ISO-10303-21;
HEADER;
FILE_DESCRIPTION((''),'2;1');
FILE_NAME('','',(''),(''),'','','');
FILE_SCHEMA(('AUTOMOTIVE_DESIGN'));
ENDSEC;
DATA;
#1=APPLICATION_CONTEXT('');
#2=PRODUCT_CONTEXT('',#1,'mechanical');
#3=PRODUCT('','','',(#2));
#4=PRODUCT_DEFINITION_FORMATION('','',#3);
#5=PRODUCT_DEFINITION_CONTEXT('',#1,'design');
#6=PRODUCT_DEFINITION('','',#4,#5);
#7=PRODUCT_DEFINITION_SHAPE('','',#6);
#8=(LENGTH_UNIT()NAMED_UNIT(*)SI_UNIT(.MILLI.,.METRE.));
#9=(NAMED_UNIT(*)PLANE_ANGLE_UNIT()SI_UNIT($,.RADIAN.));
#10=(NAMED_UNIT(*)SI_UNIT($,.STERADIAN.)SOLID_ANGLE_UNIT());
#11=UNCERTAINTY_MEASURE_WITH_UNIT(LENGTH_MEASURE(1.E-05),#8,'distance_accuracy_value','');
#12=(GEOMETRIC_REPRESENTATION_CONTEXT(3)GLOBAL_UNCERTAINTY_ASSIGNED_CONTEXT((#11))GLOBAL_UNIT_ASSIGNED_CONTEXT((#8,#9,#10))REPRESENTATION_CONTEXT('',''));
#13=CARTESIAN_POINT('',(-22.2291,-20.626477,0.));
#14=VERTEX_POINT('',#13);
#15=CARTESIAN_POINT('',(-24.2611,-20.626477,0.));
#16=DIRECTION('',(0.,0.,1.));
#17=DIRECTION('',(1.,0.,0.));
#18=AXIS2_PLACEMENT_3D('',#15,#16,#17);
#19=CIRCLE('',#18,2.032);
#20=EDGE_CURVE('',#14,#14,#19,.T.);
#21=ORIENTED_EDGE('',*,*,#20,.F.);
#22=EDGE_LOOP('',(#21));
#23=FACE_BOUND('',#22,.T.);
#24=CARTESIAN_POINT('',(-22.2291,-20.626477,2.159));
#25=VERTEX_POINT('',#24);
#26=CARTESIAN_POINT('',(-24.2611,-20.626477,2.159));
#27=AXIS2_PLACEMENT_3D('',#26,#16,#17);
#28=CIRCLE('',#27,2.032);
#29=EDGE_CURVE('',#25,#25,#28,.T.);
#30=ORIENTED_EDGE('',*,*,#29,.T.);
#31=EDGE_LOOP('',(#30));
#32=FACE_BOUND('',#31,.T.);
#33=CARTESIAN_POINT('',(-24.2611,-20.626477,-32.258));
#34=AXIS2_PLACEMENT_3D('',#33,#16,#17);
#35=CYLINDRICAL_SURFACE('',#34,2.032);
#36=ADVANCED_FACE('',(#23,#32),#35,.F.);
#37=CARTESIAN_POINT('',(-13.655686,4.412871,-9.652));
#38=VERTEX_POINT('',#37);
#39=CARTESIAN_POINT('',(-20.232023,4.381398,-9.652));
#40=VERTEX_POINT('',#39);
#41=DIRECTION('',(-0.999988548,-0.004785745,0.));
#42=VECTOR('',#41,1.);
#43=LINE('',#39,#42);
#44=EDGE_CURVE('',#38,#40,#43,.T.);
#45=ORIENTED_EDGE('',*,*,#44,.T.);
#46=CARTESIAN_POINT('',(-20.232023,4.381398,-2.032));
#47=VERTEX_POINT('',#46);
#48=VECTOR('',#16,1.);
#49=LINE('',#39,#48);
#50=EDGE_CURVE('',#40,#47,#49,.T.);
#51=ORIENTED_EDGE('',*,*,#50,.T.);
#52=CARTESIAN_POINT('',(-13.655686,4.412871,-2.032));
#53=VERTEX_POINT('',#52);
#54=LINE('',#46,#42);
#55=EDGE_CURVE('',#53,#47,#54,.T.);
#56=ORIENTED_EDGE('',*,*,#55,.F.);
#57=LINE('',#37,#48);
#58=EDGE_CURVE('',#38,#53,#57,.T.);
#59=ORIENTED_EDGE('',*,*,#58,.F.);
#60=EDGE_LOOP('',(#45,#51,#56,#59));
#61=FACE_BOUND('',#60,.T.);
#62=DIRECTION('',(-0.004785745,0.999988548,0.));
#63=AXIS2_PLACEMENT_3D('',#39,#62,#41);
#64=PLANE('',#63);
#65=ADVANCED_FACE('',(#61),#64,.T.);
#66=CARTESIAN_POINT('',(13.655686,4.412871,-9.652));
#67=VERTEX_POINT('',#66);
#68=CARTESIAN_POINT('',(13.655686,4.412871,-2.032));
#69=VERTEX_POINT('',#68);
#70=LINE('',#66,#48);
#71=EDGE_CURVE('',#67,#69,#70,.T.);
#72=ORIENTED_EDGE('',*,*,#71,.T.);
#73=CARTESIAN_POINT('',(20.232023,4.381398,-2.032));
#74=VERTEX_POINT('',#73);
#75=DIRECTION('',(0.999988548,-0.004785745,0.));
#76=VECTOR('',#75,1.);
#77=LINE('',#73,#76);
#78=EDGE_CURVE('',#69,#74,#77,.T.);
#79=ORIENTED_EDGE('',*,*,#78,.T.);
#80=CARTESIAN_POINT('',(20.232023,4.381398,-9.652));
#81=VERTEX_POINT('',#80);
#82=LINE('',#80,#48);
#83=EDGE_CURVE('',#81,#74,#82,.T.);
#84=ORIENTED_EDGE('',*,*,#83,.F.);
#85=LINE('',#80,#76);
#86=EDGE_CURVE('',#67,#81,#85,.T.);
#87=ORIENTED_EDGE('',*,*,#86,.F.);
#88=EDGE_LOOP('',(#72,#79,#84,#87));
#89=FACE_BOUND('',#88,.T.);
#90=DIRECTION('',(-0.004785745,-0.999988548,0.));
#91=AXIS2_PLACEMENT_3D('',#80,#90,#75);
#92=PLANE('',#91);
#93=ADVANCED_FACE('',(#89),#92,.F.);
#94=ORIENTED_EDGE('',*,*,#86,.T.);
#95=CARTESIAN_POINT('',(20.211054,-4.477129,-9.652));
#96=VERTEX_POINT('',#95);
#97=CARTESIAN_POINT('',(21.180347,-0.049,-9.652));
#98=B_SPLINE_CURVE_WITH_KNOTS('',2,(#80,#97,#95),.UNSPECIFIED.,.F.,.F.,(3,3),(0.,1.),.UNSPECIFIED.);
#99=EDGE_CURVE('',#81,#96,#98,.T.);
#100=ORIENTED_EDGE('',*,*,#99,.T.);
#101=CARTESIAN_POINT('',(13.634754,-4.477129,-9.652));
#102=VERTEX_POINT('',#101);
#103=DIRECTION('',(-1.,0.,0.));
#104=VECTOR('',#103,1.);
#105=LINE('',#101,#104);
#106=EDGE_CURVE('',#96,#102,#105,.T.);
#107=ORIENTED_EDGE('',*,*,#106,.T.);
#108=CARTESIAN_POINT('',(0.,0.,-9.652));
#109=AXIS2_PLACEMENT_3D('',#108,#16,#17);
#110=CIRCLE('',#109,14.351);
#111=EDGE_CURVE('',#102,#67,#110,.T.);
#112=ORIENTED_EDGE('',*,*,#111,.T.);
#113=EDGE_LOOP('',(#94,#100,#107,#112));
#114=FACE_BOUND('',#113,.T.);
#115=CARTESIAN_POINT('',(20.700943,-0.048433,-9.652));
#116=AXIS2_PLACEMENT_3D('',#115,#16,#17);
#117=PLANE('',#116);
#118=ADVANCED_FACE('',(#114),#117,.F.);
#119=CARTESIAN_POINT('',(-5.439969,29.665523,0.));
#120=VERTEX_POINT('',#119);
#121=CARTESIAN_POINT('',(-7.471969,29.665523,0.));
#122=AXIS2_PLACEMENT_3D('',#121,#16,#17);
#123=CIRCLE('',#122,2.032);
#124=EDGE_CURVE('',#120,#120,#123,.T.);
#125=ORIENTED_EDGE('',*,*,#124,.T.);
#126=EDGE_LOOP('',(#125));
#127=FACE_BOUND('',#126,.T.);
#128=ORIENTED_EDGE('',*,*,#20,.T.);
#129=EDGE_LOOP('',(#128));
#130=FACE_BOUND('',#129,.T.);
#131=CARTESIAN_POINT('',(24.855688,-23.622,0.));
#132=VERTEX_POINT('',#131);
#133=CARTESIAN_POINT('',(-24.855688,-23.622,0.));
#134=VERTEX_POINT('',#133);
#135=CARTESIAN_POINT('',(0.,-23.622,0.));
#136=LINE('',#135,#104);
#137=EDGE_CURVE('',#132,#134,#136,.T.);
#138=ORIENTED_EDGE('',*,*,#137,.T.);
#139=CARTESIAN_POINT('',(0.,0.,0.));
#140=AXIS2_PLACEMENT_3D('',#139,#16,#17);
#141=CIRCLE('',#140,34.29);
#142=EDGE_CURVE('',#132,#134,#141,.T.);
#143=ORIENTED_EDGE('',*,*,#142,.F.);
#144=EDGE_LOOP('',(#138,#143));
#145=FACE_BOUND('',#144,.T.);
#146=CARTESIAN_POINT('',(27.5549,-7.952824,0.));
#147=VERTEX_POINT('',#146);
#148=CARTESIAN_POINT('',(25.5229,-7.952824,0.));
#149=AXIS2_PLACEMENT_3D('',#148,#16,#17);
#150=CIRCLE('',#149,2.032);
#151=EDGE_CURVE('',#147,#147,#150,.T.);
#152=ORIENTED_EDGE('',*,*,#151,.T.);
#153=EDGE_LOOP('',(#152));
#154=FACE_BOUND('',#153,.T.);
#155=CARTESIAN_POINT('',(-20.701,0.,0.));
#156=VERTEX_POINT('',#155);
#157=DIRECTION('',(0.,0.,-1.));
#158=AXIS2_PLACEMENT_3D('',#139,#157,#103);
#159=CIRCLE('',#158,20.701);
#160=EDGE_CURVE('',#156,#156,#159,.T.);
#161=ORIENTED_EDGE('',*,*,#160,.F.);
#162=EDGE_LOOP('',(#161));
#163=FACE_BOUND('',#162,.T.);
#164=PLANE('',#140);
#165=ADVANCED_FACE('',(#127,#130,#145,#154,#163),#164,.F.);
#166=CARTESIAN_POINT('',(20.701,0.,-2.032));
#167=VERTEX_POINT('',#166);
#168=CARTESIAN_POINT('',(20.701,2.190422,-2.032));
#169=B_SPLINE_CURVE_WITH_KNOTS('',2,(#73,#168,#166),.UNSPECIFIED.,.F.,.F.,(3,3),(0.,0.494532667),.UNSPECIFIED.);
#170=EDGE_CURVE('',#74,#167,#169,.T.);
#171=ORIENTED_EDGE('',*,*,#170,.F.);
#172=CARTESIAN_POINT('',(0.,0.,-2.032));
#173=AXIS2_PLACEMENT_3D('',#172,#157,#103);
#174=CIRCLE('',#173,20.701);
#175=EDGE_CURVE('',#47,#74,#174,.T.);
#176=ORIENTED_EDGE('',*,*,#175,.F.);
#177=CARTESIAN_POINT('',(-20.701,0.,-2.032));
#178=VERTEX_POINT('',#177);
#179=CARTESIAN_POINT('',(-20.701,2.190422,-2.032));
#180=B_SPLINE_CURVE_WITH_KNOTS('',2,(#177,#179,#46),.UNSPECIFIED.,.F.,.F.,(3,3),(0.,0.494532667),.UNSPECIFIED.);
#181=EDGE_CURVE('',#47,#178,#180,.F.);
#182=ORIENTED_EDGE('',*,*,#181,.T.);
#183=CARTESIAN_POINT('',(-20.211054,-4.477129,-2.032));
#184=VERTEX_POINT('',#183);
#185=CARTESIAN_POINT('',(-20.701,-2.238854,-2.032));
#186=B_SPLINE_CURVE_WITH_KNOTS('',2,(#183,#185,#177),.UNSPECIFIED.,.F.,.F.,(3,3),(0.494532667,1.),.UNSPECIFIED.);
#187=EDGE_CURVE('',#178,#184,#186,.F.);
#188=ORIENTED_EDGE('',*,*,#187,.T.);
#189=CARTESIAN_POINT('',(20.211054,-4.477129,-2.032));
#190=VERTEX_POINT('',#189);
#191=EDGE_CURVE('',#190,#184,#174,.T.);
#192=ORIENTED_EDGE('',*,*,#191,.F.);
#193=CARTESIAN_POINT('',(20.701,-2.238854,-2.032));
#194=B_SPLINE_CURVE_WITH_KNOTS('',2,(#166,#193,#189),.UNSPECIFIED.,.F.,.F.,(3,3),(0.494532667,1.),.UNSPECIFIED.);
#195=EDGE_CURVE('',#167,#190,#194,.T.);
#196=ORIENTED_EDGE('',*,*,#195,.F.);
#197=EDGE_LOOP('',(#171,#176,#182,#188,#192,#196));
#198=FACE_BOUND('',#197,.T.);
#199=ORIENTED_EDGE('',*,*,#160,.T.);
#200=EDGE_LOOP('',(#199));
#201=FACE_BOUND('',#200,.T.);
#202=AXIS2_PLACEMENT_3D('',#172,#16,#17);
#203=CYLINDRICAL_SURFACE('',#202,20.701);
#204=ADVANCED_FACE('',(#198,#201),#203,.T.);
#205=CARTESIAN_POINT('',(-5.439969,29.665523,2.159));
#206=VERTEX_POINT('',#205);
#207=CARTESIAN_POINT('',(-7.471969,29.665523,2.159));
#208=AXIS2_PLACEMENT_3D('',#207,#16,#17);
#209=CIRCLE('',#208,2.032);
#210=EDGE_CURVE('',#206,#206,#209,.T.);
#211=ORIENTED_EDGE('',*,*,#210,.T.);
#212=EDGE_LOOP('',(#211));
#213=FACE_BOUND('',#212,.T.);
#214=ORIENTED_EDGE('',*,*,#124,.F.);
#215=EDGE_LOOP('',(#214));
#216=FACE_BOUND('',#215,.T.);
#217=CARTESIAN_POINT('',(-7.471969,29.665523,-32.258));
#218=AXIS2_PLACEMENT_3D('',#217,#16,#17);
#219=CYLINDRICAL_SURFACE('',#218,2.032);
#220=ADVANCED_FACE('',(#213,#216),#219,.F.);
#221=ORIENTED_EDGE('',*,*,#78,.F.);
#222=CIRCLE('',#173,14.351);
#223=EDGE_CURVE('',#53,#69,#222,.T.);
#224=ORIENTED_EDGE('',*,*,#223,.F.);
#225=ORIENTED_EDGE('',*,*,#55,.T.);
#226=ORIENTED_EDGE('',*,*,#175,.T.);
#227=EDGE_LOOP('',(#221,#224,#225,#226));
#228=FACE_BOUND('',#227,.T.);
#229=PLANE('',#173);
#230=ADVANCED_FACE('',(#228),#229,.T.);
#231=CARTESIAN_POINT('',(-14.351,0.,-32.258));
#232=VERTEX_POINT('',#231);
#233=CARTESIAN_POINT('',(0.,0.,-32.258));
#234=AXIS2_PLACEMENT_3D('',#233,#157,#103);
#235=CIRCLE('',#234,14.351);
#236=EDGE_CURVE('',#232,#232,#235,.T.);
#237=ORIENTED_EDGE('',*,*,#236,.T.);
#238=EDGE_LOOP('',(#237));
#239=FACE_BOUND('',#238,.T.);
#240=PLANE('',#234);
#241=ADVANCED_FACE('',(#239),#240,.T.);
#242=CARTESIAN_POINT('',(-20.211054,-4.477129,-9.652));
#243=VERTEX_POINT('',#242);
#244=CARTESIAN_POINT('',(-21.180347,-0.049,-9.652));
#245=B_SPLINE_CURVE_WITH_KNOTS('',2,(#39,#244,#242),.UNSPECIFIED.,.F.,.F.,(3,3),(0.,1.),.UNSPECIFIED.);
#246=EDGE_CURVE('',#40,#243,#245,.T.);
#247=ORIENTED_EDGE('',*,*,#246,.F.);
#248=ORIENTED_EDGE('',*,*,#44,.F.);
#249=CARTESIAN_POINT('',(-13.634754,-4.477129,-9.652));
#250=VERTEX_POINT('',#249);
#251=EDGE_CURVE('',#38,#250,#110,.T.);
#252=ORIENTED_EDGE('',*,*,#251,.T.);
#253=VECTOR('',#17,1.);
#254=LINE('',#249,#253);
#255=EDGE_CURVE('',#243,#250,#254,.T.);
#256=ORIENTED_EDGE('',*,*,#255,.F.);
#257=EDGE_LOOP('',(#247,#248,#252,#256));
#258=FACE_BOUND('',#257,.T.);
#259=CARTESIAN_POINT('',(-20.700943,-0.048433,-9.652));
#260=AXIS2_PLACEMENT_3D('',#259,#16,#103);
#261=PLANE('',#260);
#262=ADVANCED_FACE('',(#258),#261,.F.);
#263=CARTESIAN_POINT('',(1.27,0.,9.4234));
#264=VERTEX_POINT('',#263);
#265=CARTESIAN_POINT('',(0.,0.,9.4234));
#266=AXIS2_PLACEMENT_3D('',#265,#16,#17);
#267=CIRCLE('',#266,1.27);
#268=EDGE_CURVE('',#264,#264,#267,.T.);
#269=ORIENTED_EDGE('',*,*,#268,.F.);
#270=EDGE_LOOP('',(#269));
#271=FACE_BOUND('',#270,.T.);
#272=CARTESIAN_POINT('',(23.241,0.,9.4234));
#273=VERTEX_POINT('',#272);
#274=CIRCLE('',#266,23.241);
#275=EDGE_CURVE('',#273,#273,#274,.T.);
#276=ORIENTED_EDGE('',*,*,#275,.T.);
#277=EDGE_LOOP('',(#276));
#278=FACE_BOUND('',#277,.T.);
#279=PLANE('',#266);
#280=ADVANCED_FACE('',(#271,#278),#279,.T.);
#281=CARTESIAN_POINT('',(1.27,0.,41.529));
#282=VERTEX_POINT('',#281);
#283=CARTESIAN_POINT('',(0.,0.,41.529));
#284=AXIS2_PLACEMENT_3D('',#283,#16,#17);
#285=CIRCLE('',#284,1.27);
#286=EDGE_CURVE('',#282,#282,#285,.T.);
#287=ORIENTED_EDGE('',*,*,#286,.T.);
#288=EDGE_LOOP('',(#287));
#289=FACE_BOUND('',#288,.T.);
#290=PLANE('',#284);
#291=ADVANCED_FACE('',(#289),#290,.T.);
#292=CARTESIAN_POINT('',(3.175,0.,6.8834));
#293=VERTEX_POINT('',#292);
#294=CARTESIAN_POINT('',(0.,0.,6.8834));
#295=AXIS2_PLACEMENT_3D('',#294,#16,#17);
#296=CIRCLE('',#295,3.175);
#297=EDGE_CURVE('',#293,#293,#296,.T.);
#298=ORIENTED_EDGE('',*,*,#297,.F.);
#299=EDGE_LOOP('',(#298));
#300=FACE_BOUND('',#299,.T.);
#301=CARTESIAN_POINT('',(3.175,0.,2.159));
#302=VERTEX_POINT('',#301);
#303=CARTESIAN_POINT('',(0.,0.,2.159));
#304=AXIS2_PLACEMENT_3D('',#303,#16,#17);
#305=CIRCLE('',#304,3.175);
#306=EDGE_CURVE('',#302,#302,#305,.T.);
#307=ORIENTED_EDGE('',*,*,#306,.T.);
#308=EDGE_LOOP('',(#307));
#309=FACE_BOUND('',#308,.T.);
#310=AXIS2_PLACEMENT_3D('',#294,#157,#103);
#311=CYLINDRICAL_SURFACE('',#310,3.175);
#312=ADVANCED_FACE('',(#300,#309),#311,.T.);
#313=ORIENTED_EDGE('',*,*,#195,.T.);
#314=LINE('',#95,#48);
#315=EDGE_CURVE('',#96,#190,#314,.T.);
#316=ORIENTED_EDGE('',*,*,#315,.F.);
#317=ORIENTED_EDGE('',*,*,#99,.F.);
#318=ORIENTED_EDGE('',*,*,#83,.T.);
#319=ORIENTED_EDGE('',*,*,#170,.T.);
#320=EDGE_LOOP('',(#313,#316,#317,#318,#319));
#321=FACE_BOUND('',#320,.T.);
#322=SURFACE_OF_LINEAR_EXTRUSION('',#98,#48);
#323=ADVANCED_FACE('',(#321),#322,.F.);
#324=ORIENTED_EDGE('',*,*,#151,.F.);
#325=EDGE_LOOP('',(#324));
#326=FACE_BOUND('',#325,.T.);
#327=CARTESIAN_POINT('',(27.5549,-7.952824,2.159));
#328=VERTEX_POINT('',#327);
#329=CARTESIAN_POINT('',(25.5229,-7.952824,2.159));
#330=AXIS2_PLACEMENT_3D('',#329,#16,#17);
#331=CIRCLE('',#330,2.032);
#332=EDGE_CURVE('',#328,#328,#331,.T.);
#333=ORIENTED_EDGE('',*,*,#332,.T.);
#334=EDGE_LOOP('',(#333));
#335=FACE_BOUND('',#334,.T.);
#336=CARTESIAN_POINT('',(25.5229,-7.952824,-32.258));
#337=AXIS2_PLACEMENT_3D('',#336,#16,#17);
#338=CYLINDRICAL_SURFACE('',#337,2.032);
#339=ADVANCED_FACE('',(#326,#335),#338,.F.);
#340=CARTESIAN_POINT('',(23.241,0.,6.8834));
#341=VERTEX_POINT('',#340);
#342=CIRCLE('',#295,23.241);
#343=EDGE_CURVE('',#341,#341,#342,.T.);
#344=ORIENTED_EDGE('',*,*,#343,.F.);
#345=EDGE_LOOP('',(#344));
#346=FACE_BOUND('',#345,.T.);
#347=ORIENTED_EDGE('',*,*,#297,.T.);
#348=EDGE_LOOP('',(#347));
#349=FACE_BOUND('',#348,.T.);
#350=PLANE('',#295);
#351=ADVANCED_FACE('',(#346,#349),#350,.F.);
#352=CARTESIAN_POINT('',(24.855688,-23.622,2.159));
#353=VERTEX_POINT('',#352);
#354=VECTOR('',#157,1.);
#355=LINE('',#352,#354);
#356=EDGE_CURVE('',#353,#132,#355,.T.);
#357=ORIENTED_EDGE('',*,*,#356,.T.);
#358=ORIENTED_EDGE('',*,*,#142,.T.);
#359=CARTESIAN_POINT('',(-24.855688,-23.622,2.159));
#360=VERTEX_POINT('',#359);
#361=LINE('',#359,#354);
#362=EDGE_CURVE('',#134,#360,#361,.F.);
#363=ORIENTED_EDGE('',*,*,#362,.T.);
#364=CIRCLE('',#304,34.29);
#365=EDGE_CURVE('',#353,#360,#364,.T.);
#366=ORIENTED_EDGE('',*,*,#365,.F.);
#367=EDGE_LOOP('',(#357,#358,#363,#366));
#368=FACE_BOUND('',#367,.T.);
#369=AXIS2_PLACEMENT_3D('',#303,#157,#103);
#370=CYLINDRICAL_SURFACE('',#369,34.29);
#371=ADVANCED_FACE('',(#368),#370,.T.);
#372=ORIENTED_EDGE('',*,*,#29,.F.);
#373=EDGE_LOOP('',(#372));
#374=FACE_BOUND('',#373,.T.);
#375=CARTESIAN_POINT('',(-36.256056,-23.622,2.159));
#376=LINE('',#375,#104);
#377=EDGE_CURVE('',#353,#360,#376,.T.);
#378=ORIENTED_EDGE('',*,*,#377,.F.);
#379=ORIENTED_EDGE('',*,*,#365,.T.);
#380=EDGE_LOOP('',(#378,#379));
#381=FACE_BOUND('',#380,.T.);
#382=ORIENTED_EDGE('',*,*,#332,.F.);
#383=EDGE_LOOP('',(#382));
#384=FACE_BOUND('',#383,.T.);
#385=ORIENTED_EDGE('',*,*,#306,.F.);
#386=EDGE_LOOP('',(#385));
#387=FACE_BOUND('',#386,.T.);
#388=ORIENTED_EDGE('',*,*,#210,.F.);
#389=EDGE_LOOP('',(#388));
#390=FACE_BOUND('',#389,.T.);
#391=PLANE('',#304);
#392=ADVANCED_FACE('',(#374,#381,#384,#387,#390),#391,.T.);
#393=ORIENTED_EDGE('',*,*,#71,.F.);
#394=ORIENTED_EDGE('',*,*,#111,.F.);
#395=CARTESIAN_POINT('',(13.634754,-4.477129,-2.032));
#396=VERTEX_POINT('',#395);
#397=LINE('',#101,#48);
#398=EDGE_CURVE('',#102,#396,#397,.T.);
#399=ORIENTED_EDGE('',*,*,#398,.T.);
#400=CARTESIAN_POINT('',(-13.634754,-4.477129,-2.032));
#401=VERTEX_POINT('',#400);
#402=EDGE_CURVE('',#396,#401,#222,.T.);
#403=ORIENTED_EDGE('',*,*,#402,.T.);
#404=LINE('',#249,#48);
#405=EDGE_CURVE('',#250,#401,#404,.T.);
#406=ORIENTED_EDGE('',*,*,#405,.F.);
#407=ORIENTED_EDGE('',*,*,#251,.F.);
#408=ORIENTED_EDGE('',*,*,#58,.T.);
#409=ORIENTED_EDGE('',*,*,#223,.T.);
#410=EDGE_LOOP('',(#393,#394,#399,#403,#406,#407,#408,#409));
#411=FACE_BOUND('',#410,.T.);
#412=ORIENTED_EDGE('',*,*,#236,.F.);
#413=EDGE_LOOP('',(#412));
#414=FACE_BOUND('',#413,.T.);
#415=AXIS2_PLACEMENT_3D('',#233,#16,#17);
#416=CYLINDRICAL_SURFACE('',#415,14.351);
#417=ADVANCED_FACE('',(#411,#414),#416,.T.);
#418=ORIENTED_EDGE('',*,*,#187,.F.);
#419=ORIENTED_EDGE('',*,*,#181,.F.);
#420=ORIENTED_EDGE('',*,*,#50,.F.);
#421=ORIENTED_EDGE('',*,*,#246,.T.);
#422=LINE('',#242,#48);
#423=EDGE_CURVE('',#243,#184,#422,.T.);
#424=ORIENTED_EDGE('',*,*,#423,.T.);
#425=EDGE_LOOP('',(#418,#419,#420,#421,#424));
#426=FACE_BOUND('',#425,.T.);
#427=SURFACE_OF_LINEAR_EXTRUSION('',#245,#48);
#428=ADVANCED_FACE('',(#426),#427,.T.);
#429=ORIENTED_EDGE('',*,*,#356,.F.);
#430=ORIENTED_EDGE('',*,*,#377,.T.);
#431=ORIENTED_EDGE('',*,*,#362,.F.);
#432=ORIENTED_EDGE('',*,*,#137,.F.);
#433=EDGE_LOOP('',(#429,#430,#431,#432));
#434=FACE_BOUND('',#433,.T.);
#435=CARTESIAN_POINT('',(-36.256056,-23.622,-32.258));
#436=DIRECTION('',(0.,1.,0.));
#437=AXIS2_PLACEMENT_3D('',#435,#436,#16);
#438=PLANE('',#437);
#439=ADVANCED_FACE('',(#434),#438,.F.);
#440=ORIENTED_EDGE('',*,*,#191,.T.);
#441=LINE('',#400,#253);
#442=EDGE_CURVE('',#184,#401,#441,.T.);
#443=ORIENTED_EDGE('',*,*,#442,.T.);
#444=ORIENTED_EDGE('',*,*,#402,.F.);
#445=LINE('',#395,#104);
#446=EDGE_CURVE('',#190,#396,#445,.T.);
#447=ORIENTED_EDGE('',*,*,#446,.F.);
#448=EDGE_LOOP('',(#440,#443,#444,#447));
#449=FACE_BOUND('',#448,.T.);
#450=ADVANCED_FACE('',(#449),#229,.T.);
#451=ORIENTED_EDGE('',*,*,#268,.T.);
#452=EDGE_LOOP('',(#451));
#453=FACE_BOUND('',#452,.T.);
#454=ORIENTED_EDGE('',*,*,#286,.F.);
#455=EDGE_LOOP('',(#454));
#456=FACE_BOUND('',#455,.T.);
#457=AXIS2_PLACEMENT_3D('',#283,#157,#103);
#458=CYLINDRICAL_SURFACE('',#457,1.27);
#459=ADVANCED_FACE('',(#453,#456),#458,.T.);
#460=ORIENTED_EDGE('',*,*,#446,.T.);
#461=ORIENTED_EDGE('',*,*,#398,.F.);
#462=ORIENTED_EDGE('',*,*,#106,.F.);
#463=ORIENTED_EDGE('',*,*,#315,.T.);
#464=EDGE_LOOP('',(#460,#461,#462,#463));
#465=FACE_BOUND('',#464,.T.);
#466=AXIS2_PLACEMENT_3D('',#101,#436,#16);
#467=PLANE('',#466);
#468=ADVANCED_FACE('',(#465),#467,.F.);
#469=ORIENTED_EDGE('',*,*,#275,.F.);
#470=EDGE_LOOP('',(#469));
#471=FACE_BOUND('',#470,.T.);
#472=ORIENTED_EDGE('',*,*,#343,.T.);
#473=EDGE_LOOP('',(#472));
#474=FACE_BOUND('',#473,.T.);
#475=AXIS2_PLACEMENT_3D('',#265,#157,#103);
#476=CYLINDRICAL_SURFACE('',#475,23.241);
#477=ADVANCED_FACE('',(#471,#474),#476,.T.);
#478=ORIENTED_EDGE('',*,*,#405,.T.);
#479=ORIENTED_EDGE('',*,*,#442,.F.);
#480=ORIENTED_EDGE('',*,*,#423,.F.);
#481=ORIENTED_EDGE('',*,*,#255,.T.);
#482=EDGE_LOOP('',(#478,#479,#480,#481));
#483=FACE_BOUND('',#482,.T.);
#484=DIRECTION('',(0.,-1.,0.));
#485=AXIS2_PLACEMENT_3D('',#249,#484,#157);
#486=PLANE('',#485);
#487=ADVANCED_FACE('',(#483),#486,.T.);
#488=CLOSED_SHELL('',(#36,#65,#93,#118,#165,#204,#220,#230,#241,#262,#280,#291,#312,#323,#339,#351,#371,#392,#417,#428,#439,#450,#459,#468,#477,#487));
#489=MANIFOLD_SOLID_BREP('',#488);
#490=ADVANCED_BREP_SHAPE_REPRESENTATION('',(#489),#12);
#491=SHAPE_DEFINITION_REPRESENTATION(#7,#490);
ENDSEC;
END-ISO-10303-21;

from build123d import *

# Parameters (mm, degrees)
SKETCH1_R           = 34.29
BOSS_EXTRUDE1_DEPTH = 2.159
SKETCH3_R           = 1.27
BOSS_EXTRUDE2_DEPTH = 39.37
SKETCH4_R           = 20.701
BOSS_EXTRUDE3_DEPTH = 2.032
SKETCH5_R           = 14.351
BOSS_EXTRUDE4_DEPTH = 30.226
CUT_EXTRUDE1_DEPTH  = 63.462829747
BOSS_EXTRUDE5_DEPTH = 7.62
SKETCH7_R           = 2.032
CUT_EXTRUDE2_DEPTH  = 63.462829747
SKETCH8_R           = 3.175
BOSS_EXTRUDE6_DEPTH = 4.7244
SKETCH9_R           = 23.241
BOSS_EXTRUDE7_DEPTH = 2.54


# Read off the part's stored shape, not the designer's step: Mirror1
with BuildPart() as part:
    # Sketch1 → Boss-Extrude1 (new body)
    with BuildSketch(Plane.XY):
        Circle(SKETCH1_R)
    extrude(amount=BOSS_EXTRUDE1_DEPTH)

    # Sketch3 → Boss-Extrude2 (add)
    with BuildSketch(Plane.XY.offset(2.159)):
        Circle(SKETCH3_R)
    extrude(amount=BOSS_EXTRUDE2_DEPTH)

    # Sketch4 → Boss-Extrude3 (add)
    with BuildSketch(Plane(origin=(0, 0, 0), x_dir=(-1, 0, 0), z_dir=(0, 0, -1))):
        Circle(SKETCH4_R)
    extrude(amount=BOSS_EXTRUDE3_DEPTH)

    # Sketch5 → Boss-Extrude4 (add)
    with BuildSketch(Plane(origin=(0, 0, -2.032), x_dir=(-1, 0, 0), z_dir=(0, 0, -1))):
        Circle(SKETCH5_R)
    extrude(amount=BOSS_EXTRUDE4_DEPTH)

    # Sketch2 → Cut-Extrude1 (cut, through all)
    with BuildSketch(Plane.XY.offset(2.159)):
        Polygon((0, -34.29), (-36.256055522, -34.29), (-36.256055522, -23.622), (33.75035888, -23.622), (33.75035888, -34.29), align=None)
    extrude(amount=-CUT_EXTRUDE1_DEPTH, mode=Mode.SUBTRACT)

    # Sketch6 → Boss-Extrude5 (add)
    with BuildSketch(Plane(origin=(0, 0, -2.032), x_dir=(-1, 0, 0), z_dir=(0, 0, -1))):
        with BuildLine():
            Line((-20.232022887, 4.381398281), (-13.655686281, 4.41287131))
            Line((-13.655686281, 4.41287131), (-13.634754112, -4.47712869))
            Line((-13.634754112, -4.47712869), (-20.211054393, -4.47712869))
            add(Edge.make_bspline(
                [(-20.232022887, 4.381398281), (-21.180346718, -0.048999972), (-20.211054393, -4.47712869)],
                knots=[0, 0, 0, 1, 1, 1], degree=2))
        make_face()
    extrude(amount=BOSS_EXTRUDE5_DEPTH)

    # Mirror1: part across plane


with BuildPart() as part_1:
    add(part.part)
    add(part.part.mirror(Plane(origin=(0, 0, 0), x_dir=(0, 0, 1), z_dir=(1, 0, 0))))

    # Sketch7 → Cut-Extrude2 (cut, through all)
    with BuildSketch(Plane.XY.offset(2.159)):
        with Locations((-24.261099887, -20.626476503)):
            Circle(SKETCH7_R)
        with Locations((-7.471969114, 29.665523497)):
            Circle(SKETCH7_R)
        with Locations((25.522900113, -7.952823738)):
            Circle(SKETCH7_R)
    extrude(amount=-CUT_EXTRUDE2_DEPTH, mode=Mode.SUBTRACT)

    # Sketch8 → Boss-Extrude6 (add)
    with BuildSketch(Plane.XY.offset(2.159)):
        Circle(SKETCH8_R)
    extrude(amount=BOSS_EXTRUDE6_DEPTH)

    # Sketch9 → Boss-Extrude7 (add)
    with BuildSketch(Plane.XY.offset(6.8834)):
        Circle(SKETCH9_R)
    extrude(amount=BOSS_EXTRUDE7_DEPTH)


solid = part_1.part
